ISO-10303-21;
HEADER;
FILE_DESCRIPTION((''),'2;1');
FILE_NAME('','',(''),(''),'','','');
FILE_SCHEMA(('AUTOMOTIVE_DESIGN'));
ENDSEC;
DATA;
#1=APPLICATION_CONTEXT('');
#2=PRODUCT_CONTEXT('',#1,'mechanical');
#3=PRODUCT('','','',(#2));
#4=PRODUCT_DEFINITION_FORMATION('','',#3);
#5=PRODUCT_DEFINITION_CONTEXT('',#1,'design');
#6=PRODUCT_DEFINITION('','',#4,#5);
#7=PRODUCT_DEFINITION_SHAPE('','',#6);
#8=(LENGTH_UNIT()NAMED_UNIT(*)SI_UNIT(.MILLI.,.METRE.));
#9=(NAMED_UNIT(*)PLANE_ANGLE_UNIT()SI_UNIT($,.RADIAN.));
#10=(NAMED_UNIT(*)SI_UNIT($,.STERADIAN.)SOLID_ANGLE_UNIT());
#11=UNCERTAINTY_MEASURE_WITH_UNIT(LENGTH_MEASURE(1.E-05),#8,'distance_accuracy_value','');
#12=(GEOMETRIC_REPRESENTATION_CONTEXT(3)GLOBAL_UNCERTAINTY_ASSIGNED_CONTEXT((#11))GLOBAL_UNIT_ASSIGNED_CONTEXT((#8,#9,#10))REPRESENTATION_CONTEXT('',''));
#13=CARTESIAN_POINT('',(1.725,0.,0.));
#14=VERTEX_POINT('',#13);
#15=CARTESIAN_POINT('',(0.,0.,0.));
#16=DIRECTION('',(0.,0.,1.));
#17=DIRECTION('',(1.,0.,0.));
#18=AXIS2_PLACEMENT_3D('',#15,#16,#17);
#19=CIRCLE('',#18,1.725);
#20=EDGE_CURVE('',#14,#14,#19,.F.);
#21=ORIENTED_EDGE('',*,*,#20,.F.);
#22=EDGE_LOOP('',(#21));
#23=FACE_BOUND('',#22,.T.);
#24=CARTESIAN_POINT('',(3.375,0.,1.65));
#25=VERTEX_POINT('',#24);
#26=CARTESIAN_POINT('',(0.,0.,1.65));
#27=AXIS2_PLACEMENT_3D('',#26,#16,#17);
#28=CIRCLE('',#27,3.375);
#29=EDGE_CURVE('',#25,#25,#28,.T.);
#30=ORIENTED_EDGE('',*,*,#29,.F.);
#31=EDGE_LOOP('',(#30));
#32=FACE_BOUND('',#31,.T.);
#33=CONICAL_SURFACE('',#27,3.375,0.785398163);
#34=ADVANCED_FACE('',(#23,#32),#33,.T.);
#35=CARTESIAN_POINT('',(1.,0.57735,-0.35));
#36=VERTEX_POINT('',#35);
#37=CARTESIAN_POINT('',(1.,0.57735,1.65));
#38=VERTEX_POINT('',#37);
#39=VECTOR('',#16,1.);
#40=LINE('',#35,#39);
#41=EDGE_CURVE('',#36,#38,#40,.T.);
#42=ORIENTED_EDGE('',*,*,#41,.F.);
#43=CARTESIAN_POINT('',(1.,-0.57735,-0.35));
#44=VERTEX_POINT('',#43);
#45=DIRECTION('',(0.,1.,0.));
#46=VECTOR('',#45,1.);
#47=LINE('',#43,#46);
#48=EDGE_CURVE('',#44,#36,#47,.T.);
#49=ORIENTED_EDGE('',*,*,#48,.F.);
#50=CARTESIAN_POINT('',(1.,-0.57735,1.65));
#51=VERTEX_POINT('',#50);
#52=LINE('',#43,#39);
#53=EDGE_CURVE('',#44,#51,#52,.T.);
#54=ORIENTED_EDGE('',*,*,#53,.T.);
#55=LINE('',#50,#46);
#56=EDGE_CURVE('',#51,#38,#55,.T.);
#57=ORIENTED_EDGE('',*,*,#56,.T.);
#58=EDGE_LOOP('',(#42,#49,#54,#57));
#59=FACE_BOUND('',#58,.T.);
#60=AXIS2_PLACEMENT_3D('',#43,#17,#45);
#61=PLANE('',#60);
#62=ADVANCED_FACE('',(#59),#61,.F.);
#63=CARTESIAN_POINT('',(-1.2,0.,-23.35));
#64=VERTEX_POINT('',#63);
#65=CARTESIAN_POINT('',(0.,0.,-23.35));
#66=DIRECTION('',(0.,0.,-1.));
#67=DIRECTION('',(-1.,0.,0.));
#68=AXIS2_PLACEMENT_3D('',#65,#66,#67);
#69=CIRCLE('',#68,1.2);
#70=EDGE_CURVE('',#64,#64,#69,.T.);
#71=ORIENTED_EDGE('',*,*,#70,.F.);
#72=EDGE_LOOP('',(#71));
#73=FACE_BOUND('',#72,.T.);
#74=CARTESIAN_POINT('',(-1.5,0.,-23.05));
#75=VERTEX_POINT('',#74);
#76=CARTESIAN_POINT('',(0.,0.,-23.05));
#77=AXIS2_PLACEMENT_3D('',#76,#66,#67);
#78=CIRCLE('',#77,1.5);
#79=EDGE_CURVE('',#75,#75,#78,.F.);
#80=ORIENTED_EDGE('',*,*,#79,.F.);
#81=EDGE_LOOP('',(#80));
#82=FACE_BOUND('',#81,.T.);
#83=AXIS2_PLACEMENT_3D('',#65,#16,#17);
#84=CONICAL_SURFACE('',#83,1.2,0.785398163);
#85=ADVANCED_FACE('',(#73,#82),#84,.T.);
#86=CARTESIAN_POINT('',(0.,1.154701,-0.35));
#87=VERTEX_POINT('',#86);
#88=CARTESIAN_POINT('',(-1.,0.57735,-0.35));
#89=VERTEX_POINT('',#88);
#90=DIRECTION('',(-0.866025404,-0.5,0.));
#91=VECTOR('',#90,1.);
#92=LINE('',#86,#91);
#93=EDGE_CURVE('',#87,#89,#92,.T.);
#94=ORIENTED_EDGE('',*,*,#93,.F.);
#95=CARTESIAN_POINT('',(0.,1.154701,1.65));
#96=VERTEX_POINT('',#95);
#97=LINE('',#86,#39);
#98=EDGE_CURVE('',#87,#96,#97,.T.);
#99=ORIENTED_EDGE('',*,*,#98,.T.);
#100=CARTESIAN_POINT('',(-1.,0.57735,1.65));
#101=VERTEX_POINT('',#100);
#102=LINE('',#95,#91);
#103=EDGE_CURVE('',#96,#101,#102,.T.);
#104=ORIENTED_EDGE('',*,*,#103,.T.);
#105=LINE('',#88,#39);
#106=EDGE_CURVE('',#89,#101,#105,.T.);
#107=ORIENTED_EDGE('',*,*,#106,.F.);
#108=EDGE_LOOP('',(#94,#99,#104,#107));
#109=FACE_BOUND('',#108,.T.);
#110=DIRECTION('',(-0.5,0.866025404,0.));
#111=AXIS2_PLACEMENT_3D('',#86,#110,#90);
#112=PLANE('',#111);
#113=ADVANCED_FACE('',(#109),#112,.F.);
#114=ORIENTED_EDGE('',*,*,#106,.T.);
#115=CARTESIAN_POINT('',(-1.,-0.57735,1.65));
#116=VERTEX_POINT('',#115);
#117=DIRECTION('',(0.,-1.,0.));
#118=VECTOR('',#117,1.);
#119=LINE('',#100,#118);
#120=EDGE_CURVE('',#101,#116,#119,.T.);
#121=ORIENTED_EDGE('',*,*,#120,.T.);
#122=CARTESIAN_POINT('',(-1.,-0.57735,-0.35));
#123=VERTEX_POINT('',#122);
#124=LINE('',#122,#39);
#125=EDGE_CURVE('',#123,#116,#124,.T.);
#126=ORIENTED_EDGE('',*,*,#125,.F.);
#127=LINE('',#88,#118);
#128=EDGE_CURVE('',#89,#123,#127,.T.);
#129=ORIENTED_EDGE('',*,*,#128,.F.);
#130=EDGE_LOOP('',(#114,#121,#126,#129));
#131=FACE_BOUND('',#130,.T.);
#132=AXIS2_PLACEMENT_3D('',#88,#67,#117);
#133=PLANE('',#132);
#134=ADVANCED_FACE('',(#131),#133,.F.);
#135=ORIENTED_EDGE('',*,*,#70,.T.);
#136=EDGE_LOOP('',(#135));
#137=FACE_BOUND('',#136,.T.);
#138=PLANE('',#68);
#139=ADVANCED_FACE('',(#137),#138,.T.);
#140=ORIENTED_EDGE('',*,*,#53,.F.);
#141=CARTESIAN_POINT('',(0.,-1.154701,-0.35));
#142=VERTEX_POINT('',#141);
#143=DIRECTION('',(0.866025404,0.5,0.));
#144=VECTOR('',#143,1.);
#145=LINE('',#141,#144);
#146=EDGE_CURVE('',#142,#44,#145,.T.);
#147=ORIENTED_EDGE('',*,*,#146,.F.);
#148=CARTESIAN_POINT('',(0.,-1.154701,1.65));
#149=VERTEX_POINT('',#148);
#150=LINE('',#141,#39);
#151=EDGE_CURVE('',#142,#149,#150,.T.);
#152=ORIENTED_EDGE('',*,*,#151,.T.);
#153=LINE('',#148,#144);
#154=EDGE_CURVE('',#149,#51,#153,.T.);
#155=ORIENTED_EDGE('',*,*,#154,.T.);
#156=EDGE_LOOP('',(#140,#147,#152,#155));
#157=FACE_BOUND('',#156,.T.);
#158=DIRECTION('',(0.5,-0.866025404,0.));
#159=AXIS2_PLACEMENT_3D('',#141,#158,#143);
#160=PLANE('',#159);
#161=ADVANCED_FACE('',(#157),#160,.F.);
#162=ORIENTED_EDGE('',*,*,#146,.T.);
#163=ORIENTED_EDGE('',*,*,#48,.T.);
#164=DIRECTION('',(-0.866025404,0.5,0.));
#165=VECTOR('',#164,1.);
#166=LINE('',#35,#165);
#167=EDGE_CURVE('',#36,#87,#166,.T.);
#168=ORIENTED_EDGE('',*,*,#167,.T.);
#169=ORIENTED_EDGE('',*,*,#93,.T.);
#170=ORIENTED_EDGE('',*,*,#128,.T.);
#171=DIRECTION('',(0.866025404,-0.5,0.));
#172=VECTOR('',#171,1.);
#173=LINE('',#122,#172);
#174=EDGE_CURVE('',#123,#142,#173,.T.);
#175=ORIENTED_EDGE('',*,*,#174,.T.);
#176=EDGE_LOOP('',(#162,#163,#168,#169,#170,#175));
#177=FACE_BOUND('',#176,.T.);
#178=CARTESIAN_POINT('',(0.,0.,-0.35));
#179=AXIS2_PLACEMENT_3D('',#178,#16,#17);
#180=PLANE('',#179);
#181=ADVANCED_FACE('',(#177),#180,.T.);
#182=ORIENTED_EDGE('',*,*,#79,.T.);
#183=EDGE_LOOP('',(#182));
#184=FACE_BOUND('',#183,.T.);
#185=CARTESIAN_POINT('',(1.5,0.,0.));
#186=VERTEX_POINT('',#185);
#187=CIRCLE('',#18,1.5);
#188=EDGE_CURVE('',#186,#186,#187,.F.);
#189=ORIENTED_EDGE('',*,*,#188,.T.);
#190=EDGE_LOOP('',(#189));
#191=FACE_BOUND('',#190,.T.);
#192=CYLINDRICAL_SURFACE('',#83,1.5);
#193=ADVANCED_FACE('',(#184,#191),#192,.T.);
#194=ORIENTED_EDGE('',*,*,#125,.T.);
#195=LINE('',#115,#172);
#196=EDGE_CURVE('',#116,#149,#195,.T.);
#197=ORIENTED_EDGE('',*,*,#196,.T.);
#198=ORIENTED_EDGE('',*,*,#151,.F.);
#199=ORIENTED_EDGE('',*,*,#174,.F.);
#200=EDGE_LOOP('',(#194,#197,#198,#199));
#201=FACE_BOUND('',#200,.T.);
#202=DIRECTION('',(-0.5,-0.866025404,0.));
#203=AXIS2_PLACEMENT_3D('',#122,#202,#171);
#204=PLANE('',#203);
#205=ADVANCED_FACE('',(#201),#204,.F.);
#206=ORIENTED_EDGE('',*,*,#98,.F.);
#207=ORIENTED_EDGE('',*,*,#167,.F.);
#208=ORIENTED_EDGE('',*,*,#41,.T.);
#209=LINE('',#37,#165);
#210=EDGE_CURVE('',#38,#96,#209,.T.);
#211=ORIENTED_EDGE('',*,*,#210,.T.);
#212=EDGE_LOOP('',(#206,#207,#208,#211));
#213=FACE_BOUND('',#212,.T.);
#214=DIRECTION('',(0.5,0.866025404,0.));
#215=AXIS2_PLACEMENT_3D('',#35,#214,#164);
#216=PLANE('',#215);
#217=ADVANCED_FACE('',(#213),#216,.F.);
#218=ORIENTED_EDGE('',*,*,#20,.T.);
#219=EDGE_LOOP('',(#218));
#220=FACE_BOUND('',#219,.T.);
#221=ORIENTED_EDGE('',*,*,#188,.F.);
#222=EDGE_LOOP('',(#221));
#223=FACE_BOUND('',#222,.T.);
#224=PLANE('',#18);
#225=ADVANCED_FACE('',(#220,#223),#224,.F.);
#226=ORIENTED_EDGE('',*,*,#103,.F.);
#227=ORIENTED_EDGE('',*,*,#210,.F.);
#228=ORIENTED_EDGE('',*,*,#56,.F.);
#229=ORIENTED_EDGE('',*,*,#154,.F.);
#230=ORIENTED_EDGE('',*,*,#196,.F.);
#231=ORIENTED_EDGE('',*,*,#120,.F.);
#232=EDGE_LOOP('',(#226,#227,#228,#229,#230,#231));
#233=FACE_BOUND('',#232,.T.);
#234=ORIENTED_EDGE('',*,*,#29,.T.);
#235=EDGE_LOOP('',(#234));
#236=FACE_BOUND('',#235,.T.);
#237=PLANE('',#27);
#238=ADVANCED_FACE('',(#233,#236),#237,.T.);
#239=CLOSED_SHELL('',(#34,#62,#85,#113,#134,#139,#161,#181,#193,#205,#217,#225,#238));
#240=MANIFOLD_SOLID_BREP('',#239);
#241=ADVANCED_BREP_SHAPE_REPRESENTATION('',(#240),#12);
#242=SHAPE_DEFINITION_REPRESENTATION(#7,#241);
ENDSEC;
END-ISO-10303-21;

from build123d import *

# Parameters (mm, degrees)
SKETCH1_R           = 3.375
BOSS_EXTRUDE1_DEPTH = 1.65
SKETCH2_R           = 1.5
BOSS_EXTRUDE2_DEPTH = 23.35
CHAMFER1_SIZE       = 0.3
CUT_EXTRUDE1_DEPTH  = 2
CHAMFER2_SIZE       = 1.65


with BuildPart() as part:
    # Sketch1 → Boss-Extrude1 (new body)
    with BuildSketch(Plane.XY):
        Circle(SKETCH1_R)
    extrude(amount=BOSS_EXTRUDE1_DEPTH)

    # Sketch2 → Boss-Extrude2 (add)
    with BuildSketch(Plane(origin=(0, 0, 0), x_dir=(-1, 0, 0), z_dir=(0, 0, -1))):
        with Locations(Location((0, 0, 0), (0, 0, 180))):
            Circle(SKETCH2_R)
    extrude(amount=BOSS_EXTRUDE2_DEPTH)

    # Chamfer1
    chamfer1_edges = [part.edges().sort_by_distance(p)[0] for p in [
        (-1.5, 0, -23.35),
    ]]
    chamfer(chamfer1_edges, length=CHAMFER1_SIZE)

    # Sketch3 → Cut-Extrude1 (cut)
    with BuildSketch(Plane.XY.offset(1.65)):
        Polygon((0, 1.154700538), (-1, 0.577350269), (-1, -0.577350269), (0, -1.154700538), (1, -0.577350269), (1, 0.577350269), align=None)
    extrude(amount=-CUT_EXTRUDE1_DEPTH, mode=Mode.SUBTRACT)

    # Chamfer2
    chamfer2_edges = [part.edges().sort_by_distance(p)[0] for p in [
        (-3.375, 0, 0),
    ]]
    chamfer(chamfer2_edges, length=CHAMFER2_SIZE - 0.0001)  # a hair under: the kernel refuses the full size


solid = part.part
